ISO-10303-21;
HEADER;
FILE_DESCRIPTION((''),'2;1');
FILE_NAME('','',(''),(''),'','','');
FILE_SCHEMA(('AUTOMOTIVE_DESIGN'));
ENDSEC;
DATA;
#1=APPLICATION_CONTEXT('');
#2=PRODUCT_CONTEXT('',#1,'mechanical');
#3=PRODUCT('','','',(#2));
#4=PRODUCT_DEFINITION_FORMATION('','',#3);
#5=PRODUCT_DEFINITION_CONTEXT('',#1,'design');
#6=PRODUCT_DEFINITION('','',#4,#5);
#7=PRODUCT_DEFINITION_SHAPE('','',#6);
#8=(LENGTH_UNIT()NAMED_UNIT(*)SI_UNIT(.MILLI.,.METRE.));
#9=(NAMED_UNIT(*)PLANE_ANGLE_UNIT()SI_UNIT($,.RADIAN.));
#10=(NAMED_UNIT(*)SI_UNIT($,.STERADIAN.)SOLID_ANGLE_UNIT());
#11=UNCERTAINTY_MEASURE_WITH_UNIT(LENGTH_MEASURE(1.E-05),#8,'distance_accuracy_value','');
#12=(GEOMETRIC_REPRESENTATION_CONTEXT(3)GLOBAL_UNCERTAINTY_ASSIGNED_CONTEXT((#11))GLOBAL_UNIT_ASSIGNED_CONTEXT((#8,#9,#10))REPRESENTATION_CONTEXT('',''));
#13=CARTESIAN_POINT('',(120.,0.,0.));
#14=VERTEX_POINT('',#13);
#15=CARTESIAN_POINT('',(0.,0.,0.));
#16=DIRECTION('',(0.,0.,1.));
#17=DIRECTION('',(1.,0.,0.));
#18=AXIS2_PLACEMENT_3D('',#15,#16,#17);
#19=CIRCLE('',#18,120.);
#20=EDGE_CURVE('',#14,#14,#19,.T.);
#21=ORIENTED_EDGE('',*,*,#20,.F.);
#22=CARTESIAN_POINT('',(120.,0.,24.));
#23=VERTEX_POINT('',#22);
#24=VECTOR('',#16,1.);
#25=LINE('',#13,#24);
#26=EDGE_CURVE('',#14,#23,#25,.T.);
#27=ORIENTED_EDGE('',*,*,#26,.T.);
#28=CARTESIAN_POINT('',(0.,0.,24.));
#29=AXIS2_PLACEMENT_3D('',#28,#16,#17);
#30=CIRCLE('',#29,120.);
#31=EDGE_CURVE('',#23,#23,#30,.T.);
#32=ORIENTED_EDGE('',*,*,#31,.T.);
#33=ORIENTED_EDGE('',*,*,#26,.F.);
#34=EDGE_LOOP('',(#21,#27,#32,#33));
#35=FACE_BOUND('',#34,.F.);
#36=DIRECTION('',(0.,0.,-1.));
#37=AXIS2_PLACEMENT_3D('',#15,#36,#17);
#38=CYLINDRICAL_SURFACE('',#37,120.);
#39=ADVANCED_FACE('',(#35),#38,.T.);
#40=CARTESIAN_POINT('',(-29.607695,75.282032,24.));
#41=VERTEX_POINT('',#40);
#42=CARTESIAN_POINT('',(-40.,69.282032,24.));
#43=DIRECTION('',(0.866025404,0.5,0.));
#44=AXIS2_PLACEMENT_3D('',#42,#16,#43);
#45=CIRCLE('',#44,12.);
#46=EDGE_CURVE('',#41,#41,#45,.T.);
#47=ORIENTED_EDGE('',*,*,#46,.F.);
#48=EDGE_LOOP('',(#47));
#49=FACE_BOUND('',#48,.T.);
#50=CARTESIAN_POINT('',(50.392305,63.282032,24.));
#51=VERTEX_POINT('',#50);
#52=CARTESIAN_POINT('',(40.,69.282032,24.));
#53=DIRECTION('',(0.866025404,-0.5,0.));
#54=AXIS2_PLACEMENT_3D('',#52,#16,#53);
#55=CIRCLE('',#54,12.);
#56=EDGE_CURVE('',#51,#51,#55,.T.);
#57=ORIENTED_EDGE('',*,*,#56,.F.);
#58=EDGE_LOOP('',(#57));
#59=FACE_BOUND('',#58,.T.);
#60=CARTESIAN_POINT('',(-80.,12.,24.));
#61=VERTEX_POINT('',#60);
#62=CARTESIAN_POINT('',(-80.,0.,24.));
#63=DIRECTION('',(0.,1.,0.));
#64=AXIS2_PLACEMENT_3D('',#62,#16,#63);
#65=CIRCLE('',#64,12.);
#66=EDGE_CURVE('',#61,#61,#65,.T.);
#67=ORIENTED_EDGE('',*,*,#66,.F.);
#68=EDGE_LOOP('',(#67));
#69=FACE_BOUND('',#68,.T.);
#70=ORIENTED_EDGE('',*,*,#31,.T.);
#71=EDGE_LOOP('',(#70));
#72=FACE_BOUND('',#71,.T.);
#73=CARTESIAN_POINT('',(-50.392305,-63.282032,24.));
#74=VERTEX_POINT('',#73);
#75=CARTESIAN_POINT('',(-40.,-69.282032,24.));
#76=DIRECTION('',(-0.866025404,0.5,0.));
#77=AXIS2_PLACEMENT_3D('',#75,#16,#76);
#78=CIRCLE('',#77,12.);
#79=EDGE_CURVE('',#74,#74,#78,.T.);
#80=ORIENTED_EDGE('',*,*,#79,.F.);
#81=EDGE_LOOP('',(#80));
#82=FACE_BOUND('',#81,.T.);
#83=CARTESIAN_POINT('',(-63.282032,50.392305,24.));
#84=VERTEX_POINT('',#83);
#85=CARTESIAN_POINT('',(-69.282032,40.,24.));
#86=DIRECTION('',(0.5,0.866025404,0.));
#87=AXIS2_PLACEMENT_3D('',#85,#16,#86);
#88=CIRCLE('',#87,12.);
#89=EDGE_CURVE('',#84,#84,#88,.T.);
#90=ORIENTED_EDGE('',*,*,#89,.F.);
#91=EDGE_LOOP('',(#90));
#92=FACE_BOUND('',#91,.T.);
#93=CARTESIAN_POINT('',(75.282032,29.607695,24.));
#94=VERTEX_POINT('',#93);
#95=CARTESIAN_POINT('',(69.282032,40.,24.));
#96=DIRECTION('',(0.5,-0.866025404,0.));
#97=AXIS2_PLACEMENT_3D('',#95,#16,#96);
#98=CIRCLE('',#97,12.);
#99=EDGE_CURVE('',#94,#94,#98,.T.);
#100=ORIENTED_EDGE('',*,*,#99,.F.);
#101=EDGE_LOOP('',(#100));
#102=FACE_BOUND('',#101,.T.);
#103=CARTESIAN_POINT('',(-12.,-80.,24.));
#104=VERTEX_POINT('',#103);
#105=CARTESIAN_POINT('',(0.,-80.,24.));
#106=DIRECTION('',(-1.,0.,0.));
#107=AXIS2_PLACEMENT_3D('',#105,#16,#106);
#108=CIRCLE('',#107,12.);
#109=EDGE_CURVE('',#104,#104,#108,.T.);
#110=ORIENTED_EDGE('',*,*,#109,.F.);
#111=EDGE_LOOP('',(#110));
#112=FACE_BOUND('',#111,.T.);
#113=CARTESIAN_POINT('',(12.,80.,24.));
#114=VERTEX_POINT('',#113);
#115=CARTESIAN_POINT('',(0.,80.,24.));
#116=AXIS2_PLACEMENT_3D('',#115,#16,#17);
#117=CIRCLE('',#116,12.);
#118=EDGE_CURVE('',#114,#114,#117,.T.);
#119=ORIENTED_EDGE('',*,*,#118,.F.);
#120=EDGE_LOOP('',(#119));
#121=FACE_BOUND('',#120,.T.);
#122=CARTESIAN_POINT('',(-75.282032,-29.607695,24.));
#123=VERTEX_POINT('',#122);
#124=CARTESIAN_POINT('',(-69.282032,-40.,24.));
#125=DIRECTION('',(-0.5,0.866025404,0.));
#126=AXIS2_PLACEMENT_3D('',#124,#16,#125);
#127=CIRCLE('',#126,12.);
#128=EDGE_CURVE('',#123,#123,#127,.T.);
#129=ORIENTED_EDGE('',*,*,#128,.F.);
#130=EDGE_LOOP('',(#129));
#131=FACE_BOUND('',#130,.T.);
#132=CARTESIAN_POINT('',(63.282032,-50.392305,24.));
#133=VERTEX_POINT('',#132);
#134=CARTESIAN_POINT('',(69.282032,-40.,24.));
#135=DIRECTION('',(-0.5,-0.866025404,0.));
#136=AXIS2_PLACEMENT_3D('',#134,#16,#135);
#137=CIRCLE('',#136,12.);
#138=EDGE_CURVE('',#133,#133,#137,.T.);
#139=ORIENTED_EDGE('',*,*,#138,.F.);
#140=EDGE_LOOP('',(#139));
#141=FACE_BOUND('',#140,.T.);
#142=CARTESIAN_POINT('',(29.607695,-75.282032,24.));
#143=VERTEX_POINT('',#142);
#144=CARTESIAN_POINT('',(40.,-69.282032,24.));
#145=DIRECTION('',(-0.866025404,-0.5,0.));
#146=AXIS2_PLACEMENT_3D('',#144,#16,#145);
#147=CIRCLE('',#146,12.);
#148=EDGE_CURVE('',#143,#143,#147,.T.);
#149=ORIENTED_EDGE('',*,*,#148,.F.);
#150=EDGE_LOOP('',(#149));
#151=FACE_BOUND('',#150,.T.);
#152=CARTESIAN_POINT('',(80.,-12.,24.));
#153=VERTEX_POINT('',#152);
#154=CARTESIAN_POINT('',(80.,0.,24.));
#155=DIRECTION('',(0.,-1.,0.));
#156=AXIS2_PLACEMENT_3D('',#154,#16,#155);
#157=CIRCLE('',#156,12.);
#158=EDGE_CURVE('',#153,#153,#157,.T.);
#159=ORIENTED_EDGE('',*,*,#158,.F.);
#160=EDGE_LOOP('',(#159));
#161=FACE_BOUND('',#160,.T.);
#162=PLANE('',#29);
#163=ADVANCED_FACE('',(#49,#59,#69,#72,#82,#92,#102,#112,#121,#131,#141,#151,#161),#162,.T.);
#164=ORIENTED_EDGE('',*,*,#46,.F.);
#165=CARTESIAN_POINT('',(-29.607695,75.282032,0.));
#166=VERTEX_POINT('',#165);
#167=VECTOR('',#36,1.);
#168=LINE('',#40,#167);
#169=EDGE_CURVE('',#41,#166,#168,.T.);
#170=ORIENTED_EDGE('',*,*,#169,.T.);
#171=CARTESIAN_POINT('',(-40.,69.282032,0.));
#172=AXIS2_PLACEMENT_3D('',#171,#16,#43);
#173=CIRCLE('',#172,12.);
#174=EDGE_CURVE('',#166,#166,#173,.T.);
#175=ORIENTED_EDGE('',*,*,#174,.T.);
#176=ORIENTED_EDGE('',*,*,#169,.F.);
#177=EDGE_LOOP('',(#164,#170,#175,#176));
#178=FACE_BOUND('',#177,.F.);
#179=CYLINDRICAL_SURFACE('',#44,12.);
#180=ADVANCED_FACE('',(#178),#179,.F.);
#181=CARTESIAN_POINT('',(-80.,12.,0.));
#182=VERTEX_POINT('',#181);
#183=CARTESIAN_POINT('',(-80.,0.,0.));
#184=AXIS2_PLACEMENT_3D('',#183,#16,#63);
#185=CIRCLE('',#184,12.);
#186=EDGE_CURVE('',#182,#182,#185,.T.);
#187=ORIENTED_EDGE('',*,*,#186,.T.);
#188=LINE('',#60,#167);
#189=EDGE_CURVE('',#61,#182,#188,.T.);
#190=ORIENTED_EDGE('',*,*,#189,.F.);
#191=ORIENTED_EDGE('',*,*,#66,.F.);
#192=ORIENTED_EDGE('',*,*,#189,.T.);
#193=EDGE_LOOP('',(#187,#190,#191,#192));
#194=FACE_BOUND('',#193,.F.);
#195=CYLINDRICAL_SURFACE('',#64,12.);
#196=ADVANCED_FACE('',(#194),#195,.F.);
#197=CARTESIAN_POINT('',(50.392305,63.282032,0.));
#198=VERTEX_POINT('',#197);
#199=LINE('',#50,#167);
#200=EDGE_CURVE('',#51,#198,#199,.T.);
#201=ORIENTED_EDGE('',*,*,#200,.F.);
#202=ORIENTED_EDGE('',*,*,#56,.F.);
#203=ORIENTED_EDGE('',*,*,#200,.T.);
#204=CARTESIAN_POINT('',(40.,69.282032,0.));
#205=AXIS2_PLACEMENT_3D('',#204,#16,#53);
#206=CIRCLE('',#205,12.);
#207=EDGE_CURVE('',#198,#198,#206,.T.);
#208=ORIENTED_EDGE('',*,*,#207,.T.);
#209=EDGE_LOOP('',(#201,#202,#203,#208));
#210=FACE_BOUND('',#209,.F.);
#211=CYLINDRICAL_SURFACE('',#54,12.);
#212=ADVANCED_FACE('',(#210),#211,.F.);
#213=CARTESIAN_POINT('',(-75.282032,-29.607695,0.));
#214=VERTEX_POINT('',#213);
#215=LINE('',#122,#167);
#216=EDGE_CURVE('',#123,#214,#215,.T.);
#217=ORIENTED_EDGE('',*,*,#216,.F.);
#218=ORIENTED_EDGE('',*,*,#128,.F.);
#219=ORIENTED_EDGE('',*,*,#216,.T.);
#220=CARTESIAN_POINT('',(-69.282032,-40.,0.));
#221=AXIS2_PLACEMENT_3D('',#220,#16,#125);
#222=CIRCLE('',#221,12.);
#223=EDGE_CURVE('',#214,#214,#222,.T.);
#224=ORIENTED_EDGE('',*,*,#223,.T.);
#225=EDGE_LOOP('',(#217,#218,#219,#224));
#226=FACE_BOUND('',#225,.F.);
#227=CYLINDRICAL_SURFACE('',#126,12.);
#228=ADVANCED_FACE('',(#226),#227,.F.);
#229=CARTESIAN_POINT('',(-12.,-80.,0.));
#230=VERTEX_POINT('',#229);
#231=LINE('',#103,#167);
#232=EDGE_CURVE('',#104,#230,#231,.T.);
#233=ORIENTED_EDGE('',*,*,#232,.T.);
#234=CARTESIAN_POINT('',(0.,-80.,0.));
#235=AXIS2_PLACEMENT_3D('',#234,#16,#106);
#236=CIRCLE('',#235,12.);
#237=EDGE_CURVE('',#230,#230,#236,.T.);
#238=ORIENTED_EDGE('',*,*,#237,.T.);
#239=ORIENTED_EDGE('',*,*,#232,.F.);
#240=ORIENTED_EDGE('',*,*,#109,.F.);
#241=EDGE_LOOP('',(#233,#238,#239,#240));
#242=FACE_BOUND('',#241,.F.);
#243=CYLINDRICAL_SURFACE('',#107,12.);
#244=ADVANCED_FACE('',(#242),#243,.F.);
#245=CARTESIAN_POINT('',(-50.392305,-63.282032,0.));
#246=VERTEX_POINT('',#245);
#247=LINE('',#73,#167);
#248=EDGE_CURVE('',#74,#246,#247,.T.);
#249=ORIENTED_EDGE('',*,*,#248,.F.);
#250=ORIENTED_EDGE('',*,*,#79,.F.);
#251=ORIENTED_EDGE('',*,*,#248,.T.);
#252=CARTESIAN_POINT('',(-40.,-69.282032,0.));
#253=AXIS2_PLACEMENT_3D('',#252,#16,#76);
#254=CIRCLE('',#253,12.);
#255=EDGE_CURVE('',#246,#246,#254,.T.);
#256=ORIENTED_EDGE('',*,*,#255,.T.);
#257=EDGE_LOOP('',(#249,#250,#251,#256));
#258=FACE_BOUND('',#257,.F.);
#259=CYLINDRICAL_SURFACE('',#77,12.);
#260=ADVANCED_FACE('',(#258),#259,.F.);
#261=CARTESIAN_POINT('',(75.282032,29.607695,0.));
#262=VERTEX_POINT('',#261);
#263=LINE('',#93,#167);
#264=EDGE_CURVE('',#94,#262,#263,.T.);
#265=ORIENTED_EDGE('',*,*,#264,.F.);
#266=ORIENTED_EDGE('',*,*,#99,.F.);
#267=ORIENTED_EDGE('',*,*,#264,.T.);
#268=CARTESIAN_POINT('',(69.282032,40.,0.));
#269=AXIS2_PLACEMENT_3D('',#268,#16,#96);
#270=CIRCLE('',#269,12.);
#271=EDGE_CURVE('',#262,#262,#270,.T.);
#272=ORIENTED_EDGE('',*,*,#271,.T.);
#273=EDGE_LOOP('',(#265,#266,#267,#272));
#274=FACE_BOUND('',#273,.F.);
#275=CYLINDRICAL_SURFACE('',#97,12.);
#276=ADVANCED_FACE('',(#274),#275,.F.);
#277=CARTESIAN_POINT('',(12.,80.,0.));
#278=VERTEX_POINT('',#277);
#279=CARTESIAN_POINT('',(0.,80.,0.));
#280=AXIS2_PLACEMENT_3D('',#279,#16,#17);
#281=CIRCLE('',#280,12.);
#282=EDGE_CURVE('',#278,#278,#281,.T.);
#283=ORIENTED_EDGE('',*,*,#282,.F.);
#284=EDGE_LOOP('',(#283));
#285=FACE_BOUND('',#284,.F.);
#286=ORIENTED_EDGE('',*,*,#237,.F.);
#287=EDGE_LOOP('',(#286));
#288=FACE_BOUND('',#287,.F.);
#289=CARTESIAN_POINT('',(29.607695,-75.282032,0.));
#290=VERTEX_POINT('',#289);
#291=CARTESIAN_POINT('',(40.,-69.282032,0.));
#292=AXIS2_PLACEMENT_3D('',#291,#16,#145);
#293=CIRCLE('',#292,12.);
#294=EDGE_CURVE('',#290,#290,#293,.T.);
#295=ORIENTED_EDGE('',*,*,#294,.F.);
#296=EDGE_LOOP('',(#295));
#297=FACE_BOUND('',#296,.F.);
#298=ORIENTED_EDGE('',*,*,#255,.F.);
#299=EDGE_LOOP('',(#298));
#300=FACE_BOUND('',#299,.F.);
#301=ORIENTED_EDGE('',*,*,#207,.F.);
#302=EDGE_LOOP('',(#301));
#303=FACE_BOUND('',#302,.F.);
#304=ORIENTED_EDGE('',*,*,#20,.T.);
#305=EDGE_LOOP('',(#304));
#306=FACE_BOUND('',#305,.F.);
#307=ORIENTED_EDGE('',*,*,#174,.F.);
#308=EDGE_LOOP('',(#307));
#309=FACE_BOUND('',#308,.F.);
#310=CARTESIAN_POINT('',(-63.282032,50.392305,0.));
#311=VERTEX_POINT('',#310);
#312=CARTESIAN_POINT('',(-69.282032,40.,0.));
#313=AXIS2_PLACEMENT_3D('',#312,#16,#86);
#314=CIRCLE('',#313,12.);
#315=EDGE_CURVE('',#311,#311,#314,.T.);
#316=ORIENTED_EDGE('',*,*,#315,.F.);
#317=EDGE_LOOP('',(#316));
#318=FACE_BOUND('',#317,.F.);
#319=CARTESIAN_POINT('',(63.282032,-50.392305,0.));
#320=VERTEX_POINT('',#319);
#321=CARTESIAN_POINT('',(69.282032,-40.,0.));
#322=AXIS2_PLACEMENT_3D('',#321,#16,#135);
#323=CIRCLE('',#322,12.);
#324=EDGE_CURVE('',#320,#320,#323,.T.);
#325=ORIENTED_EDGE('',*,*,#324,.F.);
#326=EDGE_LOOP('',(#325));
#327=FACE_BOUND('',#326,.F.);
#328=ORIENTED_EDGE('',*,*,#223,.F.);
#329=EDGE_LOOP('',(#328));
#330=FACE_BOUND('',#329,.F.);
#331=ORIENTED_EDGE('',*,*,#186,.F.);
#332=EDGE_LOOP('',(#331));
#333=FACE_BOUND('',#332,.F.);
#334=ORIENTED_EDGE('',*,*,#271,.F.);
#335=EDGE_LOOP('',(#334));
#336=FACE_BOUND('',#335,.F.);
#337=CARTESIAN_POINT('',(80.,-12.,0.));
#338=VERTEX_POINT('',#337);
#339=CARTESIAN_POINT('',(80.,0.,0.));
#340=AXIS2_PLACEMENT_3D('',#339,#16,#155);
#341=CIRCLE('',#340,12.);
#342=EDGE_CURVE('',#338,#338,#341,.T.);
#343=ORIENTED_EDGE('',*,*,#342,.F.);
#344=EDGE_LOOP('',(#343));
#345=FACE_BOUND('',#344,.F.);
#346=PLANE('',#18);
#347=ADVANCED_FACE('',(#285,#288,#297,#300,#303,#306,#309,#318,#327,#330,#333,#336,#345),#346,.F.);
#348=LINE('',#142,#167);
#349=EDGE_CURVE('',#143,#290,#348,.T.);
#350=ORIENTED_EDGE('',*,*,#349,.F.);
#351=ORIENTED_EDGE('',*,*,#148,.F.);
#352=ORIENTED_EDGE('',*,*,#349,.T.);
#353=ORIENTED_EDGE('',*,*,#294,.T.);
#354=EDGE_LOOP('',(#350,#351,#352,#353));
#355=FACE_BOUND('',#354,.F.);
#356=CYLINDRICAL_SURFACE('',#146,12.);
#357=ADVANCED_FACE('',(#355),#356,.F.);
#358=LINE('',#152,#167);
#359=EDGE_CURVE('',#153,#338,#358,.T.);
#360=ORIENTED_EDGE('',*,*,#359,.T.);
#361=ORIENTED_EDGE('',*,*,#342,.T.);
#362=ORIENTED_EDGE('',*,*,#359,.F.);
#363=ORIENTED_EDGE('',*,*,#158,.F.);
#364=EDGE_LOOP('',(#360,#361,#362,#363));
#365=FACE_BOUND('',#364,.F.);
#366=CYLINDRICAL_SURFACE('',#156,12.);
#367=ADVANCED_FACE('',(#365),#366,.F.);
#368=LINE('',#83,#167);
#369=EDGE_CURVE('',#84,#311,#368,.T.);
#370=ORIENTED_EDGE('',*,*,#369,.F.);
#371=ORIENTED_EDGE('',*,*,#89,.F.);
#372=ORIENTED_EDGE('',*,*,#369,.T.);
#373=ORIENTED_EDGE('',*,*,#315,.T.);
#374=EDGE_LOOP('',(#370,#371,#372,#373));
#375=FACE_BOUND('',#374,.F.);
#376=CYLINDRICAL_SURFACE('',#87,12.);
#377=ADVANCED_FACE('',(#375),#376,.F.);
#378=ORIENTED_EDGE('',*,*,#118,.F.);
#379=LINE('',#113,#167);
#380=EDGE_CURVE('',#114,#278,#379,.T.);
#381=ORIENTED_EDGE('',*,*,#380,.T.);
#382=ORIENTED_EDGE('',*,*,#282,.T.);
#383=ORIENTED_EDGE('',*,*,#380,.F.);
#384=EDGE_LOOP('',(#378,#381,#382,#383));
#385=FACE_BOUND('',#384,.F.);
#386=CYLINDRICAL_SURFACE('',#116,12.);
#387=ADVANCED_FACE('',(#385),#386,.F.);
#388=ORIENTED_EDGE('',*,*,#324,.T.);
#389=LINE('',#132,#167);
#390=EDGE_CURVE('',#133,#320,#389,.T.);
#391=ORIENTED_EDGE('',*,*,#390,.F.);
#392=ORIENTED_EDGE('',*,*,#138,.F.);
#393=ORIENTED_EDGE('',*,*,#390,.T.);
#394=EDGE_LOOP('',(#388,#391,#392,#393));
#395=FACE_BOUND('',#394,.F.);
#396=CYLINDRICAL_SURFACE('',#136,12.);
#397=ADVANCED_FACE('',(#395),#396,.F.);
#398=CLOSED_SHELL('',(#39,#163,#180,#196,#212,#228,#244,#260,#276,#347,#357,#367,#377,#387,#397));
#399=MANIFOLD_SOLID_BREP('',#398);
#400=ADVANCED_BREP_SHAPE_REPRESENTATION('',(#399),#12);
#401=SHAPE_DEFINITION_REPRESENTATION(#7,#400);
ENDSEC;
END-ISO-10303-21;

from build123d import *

# Parameters (mm, degrees)
F2_R            = 120
F3_DEPTH        = 24
F4_R            = 12
F5_DEPTH        = 24.001
F5_COPIES_COUNT = 12


# Not quite as in the source:
# - a pattern or mirror of a feature is missing from the dataset's text; its kind, count and spacing are read off the source's solid


with BuildPart() as f3:
    # F2 (on Top) → F3 (new body)
    with BuildSketch(Plane.XY):
        Circle(F2_R)
    extrude(amount=F3_DEPTH)

    # F4 (on face) → F5 (cut, through all)
    with BuildSketch(Plane.XY.offset(24)):
        with Locations((0, 80)):
            Circle(F4_R)
    f5 = extrude(amount=-F5_DEPTH, mode=Mode.SUBTRACT)

    # F5_copies: F5 ×12 about axis
    f5_copies_axis = Axis((0, 0, 0), (0, 0, 1))
    for i in range(1, F5_COPIES_COUNT):
        add(f5.rotate(f5_copies_axis, i * 360 / F5_COPIES_COUNT), mode=Mode.SUBTRACT)


solid = f3.part
